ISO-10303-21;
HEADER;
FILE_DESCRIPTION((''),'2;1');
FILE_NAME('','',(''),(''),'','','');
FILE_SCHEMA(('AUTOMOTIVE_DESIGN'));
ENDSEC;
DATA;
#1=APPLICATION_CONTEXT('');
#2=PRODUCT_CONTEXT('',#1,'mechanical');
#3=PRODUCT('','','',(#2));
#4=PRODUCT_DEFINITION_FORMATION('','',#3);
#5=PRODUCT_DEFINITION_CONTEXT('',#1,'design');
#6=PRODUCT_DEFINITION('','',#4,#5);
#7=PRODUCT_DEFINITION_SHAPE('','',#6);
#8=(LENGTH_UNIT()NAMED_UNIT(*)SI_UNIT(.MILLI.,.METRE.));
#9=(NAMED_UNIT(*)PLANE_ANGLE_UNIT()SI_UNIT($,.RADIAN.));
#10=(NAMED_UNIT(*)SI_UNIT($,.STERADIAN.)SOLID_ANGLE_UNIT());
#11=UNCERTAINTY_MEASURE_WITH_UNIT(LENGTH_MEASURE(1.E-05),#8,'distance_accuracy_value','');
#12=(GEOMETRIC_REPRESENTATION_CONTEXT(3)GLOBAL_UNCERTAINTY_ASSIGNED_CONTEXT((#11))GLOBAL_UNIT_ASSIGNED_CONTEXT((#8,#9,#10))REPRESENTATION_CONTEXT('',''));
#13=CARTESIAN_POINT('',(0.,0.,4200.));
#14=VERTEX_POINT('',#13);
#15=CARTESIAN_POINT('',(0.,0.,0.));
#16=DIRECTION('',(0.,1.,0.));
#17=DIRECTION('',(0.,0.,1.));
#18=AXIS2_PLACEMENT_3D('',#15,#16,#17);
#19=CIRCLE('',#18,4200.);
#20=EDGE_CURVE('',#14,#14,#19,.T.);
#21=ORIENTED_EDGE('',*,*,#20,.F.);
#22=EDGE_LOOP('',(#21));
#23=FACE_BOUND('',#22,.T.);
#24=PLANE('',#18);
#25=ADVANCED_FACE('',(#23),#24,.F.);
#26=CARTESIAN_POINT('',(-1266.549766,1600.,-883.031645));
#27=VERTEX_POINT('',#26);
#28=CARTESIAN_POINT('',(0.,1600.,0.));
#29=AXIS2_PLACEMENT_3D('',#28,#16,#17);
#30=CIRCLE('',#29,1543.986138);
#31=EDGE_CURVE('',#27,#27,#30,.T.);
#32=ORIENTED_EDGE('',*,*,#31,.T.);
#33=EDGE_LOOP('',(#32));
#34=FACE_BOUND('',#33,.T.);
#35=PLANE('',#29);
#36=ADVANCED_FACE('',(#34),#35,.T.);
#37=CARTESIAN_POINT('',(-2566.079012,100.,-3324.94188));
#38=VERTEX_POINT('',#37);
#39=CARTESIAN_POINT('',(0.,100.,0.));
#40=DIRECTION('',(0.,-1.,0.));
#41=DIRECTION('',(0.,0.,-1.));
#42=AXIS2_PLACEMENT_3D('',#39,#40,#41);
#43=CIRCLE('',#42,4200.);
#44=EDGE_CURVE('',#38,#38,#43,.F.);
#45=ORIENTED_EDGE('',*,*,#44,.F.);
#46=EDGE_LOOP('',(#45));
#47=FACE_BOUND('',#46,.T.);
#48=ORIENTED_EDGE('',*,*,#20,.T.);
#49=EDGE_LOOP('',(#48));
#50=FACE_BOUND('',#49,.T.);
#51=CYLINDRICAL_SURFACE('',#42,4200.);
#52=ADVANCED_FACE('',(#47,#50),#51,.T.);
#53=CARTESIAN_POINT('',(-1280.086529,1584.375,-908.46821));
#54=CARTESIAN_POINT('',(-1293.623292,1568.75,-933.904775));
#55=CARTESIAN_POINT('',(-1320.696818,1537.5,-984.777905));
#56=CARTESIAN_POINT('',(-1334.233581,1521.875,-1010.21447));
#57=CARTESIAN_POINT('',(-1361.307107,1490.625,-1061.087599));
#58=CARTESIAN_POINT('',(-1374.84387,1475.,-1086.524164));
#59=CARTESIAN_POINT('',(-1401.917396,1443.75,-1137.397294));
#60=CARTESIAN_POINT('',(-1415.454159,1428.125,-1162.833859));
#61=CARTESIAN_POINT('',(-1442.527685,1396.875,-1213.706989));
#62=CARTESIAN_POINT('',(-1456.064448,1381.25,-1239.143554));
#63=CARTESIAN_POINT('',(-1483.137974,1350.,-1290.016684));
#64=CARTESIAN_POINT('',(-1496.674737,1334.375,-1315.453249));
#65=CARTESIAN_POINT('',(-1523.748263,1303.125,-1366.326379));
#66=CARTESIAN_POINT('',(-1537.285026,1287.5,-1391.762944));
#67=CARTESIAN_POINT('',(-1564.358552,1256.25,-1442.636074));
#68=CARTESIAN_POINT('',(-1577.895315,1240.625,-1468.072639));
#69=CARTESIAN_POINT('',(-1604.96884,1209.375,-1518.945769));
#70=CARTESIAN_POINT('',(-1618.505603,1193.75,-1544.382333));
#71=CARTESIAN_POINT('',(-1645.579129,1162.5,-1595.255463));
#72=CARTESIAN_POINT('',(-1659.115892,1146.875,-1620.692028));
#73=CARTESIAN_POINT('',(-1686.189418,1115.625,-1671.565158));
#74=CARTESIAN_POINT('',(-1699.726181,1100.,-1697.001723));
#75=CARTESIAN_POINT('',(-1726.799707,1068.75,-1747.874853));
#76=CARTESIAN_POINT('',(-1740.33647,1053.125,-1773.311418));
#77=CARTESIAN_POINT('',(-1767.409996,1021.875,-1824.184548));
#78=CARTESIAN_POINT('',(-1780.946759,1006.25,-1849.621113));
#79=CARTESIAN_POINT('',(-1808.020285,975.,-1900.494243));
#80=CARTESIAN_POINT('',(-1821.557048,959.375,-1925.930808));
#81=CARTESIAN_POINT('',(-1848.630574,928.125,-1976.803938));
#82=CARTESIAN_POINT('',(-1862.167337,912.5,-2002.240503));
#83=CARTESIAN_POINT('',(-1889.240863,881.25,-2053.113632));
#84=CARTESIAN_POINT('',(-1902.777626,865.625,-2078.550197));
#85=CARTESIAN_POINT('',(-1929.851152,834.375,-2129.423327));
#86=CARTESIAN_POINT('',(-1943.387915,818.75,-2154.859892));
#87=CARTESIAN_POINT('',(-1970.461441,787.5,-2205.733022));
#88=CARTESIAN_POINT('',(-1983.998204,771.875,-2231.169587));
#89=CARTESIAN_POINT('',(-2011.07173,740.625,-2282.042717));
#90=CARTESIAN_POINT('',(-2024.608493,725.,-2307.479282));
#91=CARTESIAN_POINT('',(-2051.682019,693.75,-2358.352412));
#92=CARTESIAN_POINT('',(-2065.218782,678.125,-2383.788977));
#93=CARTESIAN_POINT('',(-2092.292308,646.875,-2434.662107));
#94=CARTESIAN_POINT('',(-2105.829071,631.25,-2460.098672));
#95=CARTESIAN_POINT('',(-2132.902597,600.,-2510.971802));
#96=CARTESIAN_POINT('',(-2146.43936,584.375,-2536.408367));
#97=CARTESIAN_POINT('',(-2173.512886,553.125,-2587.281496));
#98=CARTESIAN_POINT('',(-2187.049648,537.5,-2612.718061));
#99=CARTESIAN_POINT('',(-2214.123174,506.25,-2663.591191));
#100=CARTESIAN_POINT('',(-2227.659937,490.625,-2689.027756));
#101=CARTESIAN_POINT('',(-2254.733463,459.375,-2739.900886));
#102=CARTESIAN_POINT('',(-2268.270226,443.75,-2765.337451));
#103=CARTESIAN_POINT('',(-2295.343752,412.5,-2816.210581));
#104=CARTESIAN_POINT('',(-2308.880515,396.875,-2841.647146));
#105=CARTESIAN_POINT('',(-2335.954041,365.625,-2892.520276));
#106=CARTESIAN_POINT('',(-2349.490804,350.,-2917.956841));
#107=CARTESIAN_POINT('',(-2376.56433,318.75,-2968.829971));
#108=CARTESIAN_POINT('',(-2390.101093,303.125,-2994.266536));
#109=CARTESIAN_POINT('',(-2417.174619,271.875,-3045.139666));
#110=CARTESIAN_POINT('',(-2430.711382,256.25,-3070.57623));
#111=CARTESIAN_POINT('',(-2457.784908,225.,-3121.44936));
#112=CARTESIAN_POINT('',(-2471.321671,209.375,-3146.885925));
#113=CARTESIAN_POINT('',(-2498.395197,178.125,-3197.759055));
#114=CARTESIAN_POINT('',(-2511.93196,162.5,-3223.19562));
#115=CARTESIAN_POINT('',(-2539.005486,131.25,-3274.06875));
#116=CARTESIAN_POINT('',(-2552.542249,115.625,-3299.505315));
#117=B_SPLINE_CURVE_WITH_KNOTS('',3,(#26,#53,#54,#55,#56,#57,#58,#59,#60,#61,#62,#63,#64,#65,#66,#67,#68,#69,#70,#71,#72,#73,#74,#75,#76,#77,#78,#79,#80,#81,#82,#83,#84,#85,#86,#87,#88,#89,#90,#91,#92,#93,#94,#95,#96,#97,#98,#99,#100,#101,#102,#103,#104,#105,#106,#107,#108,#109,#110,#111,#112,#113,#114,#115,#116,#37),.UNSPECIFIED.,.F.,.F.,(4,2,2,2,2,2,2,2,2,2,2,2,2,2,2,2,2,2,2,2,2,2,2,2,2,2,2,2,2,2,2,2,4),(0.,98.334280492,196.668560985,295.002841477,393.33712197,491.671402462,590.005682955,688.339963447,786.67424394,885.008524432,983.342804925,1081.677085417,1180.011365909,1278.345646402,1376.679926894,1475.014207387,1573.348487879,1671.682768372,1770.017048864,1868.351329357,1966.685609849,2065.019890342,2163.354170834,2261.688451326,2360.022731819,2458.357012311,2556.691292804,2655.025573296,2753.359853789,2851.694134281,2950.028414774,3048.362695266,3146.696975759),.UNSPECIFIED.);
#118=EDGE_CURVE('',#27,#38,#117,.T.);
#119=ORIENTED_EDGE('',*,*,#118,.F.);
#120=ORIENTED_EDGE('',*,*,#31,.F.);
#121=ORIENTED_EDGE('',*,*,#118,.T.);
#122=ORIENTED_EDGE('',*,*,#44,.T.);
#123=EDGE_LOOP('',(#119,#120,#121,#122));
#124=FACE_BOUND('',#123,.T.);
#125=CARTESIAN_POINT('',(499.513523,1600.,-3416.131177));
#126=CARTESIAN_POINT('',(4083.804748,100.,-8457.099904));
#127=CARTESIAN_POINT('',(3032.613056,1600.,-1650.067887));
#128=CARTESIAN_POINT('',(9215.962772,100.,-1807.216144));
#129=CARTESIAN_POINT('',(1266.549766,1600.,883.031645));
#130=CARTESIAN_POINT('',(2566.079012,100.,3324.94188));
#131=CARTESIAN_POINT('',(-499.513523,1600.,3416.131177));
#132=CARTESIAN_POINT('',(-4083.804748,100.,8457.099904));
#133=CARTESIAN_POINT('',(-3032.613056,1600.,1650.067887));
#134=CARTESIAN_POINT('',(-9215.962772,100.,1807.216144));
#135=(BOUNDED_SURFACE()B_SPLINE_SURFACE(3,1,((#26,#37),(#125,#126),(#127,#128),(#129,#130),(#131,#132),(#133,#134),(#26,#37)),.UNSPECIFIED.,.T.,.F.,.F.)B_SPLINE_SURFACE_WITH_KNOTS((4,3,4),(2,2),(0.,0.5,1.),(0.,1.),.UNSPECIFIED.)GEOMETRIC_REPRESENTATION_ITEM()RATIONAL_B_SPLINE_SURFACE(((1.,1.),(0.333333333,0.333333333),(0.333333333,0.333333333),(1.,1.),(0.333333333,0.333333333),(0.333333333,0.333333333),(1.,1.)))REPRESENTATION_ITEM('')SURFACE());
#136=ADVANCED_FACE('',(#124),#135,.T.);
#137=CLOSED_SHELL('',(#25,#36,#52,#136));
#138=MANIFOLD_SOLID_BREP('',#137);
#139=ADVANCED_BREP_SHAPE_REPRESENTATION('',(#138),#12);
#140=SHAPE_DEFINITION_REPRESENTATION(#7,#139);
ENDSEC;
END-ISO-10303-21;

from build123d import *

# Parameters (mm, degrees)
SKETCH3_R           = 4200
BOSS_EXTRUDE1_DEPTH = 100


with BuildPart() as part:
    # Sketch3 → Boss-Extrude1 (new body)
    with BuildSketch(Plane(origin=(0, 0, 0), x_dir=(1, 0, 0), z_dir=(0, 1, 0))):
        with Locations(Location((0, 0, 0), (0, 0, 270))):
            Circle(SKETCH3_R)
    extrude(amount=BOSS_EXTRUDE1_DEPTH)

    # Loft1: read off the stored shape, not the designer's step
    # Loft1: loft between two sections, ruled curve by curve
    loft1_from = [
        Edge.make_bspline([(-1266.549766078, 1600, -883.031644769), (499.51352346, 1600, -3416.131176926), (3032.613055616, 1600, -1650.067887388), (1266.549766078, 1600, 883.031644769), (-499.51352346, 1600, 3416.131176926), (-3032.613055616, 1600, 1650.067887388), (-1266.549766078, 1600, -883.031644769)], [0, 0, 0, 0, 0.5, 0.5, 0.5, 1, 1, 1, 1], 3, [1, 0.333333333333333, 0.333333333333333, 1, 0.333333333333333, 0.333333333333333, 1]),
    ]
    loft1_to = [
        Edge.make_bspline([(-2566.079011828, 100, -3324.941879952), (4083.804748075, 100, -8457.099903607), (9215.962771731, 100, -1807.216143704), (2566.079011828, 100, 3324.941879952), (-4083.804748075, 100, 8457.099903607), (-9215.962771731, 100, 1807.216143704), (-2566.079011828, 100, -3324.941879952)], [0, 0, 0, 0, 0.5, 0.5, 0.5, 1, 1, 1, 1], 3, [1, 0.333333333333333, 0.333333333333333, 1, 0.333333333333333, 0.333333333333333, 1]),
    ]
    loft1 = Solid(Shell([*[Face.make_surface_from_curves(loft1_from[k], loft1_to[k]) for k in range(1)], Face(Wire(loft1_from)), Face(Wire(loft1_to))]))
    add(loft1)


solid = part.part
